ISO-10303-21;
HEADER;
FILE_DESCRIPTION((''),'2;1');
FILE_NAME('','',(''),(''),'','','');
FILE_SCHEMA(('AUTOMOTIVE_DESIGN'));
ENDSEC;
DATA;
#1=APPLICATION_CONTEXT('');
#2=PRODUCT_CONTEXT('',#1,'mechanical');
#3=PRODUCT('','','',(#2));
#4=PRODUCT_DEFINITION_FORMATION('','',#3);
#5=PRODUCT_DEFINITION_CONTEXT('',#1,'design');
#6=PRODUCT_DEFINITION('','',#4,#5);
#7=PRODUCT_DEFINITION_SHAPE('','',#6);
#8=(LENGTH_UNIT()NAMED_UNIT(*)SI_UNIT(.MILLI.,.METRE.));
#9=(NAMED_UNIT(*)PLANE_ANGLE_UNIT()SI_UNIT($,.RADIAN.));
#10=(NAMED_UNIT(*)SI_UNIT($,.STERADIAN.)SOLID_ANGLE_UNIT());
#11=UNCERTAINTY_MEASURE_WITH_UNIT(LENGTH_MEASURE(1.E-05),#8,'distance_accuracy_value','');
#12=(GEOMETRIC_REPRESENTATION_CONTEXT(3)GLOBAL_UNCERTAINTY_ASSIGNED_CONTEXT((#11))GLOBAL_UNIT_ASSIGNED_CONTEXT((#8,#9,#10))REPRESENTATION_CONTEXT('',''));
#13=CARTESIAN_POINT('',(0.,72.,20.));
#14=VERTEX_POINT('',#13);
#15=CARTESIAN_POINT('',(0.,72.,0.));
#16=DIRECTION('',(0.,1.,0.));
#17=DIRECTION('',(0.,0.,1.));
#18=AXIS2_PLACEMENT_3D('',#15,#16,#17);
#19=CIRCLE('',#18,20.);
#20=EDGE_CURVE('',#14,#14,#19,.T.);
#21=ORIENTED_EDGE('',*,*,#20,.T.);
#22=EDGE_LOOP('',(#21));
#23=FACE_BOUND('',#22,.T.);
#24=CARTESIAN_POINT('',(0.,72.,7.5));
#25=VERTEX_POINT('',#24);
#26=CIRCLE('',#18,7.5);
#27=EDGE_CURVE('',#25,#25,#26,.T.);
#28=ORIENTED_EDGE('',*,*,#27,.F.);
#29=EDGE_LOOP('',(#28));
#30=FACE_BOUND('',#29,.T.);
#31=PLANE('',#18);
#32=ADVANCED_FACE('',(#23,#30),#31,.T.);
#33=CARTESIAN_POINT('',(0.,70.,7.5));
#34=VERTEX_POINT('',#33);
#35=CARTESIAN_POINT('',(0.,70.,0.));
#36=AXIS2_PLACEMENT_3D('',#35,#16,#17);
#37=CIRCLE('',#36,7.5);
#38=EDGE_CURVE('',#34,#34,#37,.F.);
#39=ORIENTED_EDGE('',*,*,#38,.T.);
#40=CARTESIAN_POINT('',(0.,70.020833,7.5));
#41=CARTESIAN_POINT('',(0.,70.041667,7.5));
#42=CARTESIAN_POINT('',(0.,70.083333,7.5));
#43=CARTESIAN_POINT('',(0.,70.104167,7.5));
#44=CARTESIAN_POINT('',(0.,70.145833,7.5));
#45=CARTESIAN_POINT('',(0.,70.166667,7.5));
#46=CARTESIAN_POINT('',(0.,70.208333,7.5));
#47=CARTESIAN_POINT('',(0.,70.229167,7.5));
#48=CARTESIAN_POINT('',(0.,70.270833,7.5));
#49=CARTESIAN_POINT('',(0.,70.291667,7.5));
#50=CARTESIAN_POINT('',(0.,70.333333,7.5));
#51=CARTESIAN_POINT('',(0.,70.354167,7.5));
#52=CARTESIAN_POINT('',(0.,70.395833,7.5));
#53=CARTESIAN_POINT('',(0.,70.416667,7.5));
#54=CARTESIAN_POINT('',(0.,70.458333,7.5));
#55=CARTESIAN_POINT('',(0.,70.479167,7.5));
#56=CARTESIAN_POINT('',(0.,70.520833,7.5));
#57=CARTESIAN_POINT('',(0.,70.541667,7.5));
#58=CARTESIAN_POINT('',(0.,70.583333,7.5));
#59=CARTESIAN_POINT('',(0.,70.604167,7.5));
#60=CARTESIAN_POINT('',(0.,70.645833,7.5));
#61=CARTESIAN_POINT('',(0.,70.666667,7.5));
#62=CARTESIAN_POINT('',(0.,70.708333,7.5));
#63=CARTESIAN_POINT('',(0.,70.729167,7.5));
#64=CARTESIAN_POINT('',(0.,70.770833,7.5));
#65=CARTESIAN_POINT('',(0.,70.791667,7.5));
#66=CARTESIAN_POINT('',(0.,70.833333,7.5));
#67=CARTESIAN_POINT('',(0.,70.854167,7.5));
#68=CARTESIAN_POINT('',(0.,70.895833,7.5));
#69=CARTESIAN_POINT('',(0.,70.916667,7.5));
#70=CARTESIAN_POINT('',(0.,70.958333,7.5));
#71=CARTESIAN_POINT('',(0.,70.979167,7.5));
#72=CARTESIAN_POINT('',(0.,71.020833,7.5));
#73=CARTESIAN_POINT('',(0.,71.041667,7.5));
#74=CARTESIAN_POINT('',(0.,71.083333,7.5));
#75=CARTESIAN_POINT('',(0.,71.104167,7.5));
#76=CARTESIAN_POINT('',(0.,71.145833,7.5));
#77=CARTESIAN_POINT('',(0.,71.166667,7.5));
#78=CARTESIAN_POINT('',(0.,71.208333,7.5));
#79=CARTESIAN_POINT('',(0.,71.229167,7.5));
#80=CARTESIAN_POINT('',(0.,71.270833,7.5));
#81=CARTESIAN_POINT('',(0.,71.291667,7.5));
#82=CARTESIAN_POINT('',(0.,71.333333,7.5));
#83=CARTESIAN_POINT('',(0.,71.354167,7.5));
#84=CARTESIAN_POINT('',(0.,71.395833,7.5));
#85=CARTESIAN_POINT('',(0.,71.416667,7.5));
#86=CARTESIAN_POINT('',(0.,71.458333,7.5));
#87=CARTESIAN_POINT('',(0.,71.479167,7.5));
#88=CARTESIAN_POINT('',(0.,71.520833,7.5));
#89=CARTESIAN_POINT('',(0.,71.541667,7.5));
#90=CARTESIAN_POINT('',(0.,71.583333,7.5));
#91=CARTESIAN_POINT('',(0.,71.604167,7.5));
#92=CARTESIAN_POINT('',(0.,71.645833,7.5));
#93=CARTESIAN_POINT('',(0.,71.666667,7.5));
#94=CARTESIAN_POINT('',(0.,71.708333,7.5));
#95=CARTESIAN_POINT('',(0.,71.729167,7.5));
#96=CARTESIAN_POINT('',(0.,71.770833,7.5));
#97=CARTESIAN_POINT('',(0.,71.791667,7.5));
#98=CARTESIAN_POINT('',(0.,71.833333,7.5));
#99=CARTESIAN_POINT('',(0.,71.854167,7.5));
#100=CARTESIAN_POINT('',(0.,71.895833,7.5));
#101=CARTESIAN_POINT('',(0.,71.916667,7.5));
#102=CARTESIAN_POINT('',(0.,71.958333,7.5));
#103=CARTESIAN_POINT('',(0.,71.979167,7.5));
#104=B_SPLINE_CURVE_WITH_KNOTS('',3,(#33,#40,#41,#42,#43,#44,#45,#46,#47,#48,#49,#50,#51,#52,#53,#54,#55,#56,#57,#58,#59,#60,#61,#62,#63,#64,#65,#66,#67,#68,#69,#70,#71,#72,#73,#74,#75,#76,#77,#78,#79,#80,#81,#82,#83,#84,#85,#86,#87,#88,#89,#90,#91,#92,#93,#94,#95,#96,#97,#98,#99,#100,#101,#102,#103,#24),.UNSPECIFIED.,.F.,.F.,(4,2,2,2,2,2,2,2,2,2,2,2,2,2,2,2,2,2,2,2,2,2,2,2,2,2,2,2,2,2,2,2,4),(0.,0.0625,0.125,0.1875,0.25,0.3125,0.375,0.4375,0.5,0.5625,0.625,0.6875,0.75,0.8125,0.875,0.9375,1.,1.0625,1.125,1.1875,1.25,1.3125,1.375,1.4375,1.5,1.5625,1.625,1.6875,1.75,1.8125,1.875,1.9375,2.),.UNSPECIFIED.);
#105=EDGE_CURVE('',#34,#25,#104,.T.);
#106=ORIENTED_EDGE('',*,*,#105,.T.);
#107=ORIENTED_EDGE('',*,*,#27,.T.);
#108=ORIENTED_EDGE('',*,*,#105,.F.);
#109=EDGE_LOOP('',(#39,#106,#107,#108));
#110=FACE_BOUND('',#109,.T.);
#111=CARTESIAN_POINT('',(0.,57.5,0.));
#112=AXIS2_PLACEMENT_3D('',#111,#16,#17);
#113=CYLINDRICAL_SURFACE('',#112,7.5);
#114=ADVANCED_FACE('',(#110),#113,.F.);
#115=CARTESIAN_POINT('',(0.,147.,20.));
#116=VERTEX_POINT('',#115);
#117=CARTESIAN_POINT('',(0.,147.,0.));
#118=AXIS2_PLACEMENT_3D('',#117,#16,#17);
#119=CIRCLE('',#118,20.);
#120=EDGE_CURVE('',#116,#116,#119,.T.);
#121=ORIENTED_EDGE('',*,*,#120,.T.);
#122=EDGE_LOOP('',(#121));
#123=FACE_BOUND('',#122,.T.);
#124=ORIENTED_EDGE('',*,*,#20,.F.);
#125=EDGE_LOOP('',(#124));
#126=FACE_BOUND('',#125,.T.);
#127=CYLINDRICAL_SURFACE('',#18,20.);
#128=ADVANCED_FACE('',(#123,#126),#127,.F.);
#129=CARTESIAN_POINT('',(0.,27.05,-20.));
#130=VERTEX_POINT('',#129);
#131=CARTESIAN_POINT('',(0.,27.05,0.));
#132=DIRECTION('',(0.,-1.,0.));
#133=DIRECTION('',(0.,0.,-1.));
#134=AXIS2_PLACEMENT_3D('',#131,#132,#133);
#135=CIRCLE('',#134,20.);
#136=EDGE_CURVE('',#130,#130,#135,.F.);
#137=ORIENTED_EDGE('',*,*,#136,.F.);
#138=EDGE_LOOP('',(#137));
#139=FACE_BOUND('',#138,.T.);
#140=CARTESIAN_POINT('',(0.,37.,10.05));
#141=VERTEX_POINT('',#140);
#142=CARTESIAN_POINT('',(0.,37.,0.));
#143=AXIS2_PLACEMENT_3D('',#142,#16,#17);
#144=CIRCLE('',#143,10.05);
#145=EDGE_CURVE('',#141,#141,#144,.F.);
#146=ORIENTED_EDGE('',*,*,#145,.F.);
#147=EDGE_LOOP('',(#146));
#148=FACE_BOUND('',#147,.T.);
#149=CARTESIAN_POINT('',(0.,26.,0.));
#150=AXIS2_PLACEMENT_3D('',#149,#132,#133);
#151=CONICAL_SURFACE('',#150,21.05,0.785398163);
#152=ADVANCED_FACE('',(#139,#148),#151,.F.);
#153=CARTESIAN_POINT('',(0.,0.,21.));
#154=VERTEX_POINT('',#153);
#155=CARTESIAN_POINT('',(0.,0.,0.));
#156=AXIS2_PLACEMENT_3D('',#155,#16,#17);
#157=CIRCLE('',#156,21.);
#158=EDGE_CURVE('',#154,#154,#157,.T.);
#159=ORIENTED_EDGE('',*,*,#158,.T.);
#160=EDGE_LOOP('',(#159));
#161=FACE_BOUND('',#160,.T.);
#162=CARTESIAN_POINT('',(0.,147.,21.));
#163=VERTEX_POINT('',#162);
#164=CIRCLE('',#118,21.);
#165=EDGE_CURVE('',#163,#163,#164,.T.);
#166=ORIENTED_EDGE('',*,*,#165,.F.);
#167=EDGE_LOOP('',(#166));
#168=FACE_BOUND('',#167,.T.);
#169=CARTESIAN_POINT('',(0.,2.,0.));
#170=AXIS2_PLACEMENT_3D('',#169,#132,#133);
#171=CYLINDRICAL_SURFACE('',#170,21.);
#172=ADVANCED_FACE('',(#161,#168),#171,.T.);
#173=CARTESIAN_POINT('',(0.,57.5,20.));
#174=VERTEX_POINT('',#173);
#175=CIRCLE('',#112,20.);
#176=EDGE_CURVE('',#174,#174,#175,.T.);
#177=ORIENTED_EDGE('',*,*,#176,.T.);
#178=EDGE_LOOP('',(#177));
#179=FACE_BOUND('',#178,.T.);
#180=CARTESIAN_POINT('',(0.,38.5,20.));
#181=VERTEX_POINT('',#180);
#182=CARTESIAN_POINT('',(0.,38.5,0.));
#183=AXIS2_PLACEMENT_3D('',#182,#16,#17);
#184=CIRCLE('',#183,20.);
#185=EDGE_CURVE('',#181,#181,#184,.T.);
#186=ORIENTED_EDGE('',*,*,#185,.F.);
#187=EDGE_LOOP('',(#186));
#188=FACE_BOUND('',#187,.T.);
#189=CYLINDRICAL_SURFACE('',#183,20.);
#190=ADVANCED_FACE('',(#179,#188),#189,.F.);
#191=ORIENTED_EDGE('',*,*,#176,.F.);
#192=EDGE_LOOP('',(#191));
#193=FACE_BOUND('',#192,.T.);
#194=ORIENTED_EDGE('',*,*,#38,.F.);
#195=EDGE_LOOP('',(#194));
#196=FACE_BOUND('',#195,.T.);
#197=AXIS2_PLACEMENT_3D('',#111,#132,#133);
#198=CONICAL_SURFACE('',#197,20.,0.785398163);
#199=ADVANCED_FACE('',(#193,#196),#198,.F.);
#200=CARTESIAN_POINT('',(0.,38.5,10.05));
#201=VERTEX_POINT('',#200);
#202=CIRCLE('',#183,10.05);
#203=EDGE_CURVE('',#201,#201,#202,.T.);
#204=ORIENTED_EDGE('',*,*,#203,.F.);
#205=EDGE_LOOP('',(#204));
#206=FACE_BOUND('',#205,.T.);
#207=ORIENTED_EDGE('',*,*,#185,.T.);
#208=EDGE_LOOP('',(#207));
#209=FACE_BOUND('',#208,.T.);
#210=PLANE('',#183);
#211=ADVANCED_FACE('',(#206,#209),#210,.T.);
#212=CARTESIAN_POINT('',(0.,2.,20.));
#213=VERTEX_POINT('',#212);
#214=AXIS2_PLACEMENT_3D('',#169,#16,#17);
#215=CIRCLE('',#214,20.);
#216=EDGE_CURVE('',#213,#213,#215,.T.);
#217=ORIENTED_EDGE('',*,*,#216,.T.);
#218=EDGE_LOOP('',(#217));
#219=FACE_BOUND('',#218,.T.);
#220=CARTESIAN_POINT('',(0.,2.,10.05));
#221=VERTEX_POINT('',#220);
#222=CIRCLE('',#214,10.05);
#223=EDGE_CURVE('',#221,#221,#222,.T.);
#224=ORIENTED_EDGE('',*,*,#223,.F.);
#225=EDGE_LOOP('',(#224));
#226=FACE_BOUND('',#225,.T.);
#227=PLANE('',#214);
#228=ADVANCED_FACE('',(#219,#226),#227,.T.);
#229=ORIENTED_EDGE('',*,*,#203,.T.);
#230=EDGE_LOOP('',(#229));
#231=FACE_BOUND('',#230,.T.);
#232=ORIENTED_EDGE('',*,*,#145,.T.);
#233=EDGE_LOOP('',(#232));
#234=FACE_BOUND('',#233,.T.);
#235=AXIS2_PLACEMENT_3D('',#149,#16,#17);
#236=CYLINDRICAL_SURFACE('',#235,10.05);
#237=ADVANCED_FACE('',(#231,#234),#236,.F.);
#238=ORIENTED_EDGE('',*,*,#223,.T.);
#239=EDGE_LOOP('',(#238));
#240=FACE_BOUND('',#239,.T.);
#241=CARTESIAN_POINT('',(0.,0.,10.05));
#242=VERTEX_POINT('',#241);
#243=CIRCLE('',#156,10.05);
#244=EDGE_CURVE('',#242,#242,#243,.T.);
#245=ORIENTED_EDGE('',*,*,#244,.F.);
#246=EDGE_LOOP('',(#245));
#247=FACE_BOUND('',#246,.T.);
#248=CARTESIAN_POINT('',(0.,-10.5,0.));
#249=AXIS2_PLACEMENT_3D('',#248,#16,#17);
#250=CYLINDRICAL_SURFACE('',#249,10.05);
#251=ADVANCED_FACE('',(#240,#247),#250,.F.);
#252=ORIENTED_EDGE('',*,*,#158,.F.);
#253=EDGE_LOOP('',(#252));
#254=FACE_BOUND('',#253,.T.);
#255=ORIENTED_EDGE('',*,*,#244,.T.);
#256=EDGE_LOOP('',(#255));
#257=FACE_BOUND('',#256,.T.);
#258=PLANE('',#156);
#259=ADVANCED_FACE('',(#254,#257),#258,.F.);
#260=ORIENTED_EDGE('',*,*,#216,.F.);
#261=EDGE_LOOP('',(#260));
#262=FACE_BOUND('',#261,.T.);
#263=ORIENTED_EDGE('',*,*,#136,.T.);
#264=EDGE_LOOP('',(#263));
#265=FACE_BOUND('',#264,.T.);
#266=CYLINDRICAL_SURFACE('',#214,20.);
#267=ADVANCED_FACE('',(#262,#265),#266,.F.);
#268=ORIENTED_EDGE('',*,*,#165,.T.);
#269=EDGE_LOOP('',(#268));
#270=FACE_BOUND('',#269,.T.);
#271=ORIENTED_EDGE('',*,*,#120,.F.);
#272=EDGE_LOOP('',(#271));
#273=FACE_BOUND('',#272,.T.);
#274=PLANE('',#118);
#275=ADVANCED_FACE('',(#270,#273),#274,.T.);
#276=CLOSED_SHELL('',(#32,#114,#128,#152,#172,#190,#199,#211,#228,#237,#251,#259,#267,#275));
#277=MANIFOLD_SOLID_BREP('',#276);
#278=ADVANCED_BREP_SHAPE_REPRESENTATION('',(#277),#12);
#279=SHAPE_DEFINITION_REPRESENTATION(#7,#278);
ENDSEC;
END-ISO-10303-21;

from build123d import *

# Parameters (mm, degrees)
SKETCH3_R           = 21
BOSS_EXTRUDE2_DEPTH = 2
SKETCH4_R           = 10.05
CUT_EXTRUDE2_DEPTH  = 12.5
SKETCH5_R           = 21
BOSS_EXTRUDE3_DEPTH = 24
SKETCH6_R           = 20
CUT_EXTRUDE3_DEPTH  = 24
SKETCH7_R           = 21
BOSS_EXTRUDE4_DEPTH = 12.5
SKETCH8_R           = 10.05
CUT_EXTRUDE4_DEPTH  = 12.5
SKETCH9_R           = 21
BOSS_EXTRUDE5_DEPTH = 19
SKETCH10_R          = 20
CUT_EXTRUDE5_DEPTH  = 19
SKETCH11_R          = 21
BOSS_EXTRUDE6_DEPTH = 14.5
SKETCH12_R          = 7.5
CUT_EXTRUDE6_DEPTH  = 14.5
SKETCH13_R          = 21
BOSS_EXTRUDE7_DEPTH = 75
SKETCH14_R          = 20
CUT_EXTRUDE7_DEPTH  = 75
CHAMFER7_SIZE       = 11
CHAMFER8_SIZE       = 12.5


# Some blends are built 0.0001 mm under size
with BuildPart() as part:
    # Sketch3 → Boss-Extrude2 (new body)
    with BuildSketch(Plane(origin=(0, 0, 0), x_dir=(1, 0, 0), z_dir=(0, 1, 0))):
        with Locations(Location((0, 0, 0), (0, 0, 270))):
            Circle(SKETCH3_R)
    extrude(amount=BOSS_EXTRUDE2_DEPTH)

    # Sketch4 → Cut-Extrude2 (cut)
    with BuildSketch(Plane(origin=(0, 2, 0), x_dir=(1, 0, 0), z_dir=(0, 1, 0))):
        with Locations(Location((0, 0, 0), (0, 0, 270))):
            Circle(SKETCH4_R)
    extrude(amount=-CUT_EXTRUDE2_DEPTH, mode=Mode.SUBTRACT)

    # Sketch5 → Boss-Extrude3 (add)
    with BuildSketch(Plane(origin=(0, 2, 0), x_dir=(1, 0, 0), z_dir=(0, 1, 0))):
        with Locations(Location((0, 0, 0), (0, 0, 270))):
            Circle(SKETCH5_R)
    extrude(amount=BOSS_EXTRUDE3_DEPTH)

    # Sketch6 → Cut-Extrude3 (cut)
    with BuildSketch(Plane(origin=(0, 26, 0), x_dir=(1, 0, 0), z_dir=(0, 1, 0))):
        with Locations(Location((0, 0, 0), (0, 0, 270))):
            Circle(SKETCH6_R)
    extrude(amount=-CUT_EXTRUDE3_DEPTH, mode=Mode.SUBTRACT)

    # Sketch7 → Boss-Extrude4 (add)
    with BuildSketch(Plane(origin=(0, 26, 0), x_dir=(1, 0, 0), z_dir=(0, 1, 0))):
        with Locations(Location((0, 0, 0), (0, 0, 270))):
            Circle(SKETCH7_R)
    extrude(amount=BOSS_EXTRUDE4_DEPTH)

    # Sketch8 → Cut-Extrude4 (cut)
    with BuildSketch(Plane(origin=(0, 38.5, 0), x_dir=(1, 0, 0), z_dir=(0, 1, 0))):
        with Locations(Location((0, 0, 0), (0, 0, 270))):
            Circle(SKETCH8_R)
    extrude(amount=-CUT_EXTRUDE4_DEPTH, mode=Mode.SUBTRACT)

    # Sketch9 → Boss-Extrude5 (add)
    with BuildSketch(Plane(origin=(0, 38.5, 0), x_dir=(1, 0, 0), z_dir=(0, 1, 0))):
        with Locations(Location((0, 0, 0), (0, 0, 270))):
            Circle(SKETCH9_R)
    extrude(amount=BOSS_EXTRUDE5_DEPTH)

    # Sketch10 → Cut-Extrude5 (cut)
    with BuildSketch(Plane(origin=(0, 57.5, 0), x_dir=(1, 0, 0), z_dir=(0, 1, 0))):
        with Locations(Location((0, 0, 0), (0, 0, 270))):
            Circle(SKETCH10_R)
    extrude(amount=-CUT_EXTRUDE5_DEPTH, mode=Mode.SUBTRACT)

    # Sketch11 → Boss-Extrude6 (add)
    with BuildSketch(Plane(origin=(0, 57.5, 0), x_dir=(1, 0, 0), z_dir=(0, 1, 0))):
        with Locations(Location((0, 0, 0), (0, 0, 270))):
            Circle(SKETCH11_R)
    extrude(amount=BOSS_EXTRUDE6_DEPTH)

    # Sketch12 → Cut-Extrude6 (cut)
    with BuildSketch(Plane(origin=(0, 72, 0), x_dir=(1, 0, 0), z_dir=(0, 1, 0))):
        with Locations(Location((0, 0, 0), (0, 0, 270))):
            Circle(SKETCH12_R)
    extrude(amount=-CUT_EXTRUDE6_DEPTH, mode=Mode.SUBTRACT)

    # Sketch13 → Boss-Extrude7 (add)
    with BuildSketch(Plane(origin=(0, 72, 0), x_dir=(1, 0, 0), z_dir=(0, 1, 0))):
        with Locations(Location((0, 0, 0), (0, 0, 270))):
            Circle(SKETCH13_R)
    extrude(amount=BOSS_EXTRUDE7_DEPTH)

    # Sketch14 → Cut-Extrude7 (cut)
    with BuildSketch(Plane(origin=(0, 147, 0), x_dir=(1, 0, 0), z_dir=(0, 1, 0))):
        with Locations(Location((0, 0, 0), (0, 0, 270))):
            Circle(SKETCH14_R)
    extrude(amount=-CUT_EXTRUDE7_DEPTH, mode=Mode.SUBTRACT)

    # Chamfer7
    # the kernel refuses this chamfer: 11 mm, written as the material it takes off along each edge
    with BuildSketch(Plane(origin=(0, 26, 0), x_dir=(0, 0, 1), z_dir=(-1, 0, 0))) as chamfer7_piece_1_section:
        Polygon((10.05 + CHAMFER7_SIZE, 0), (10.05, CHAMFER7_SIZE), (10.05, 0), align=None)
    chamfer7_piece_1 = revolve(axis=Axis((0, 26, 0), (0, 1, 0)), mode=Mode.PRIVATE)
    chamfer7_piece_1 = chamfer7_piece_1 & Plane(origin=(0, 32.05519731, 0), x_dir=(0, 0, 1), z_dir=(0, 1, 0)) * Cylinder(20, 85, mode=Mode.PRIVATE)
    add(chamfer7_piece_1, mode=Mode.SUBTRACT)

    # Chamfer8
    chamfer8_edges = [part.edges().sort_by_distance(p)[0] for p in [
        (0, 57.5, -7.5),
    ]]
    chamfer(chamfer8_edges, length=CHAMFER8_SIZE - 0.0001)  # a hair under: the kernel refuses the full size


solid = part.part
